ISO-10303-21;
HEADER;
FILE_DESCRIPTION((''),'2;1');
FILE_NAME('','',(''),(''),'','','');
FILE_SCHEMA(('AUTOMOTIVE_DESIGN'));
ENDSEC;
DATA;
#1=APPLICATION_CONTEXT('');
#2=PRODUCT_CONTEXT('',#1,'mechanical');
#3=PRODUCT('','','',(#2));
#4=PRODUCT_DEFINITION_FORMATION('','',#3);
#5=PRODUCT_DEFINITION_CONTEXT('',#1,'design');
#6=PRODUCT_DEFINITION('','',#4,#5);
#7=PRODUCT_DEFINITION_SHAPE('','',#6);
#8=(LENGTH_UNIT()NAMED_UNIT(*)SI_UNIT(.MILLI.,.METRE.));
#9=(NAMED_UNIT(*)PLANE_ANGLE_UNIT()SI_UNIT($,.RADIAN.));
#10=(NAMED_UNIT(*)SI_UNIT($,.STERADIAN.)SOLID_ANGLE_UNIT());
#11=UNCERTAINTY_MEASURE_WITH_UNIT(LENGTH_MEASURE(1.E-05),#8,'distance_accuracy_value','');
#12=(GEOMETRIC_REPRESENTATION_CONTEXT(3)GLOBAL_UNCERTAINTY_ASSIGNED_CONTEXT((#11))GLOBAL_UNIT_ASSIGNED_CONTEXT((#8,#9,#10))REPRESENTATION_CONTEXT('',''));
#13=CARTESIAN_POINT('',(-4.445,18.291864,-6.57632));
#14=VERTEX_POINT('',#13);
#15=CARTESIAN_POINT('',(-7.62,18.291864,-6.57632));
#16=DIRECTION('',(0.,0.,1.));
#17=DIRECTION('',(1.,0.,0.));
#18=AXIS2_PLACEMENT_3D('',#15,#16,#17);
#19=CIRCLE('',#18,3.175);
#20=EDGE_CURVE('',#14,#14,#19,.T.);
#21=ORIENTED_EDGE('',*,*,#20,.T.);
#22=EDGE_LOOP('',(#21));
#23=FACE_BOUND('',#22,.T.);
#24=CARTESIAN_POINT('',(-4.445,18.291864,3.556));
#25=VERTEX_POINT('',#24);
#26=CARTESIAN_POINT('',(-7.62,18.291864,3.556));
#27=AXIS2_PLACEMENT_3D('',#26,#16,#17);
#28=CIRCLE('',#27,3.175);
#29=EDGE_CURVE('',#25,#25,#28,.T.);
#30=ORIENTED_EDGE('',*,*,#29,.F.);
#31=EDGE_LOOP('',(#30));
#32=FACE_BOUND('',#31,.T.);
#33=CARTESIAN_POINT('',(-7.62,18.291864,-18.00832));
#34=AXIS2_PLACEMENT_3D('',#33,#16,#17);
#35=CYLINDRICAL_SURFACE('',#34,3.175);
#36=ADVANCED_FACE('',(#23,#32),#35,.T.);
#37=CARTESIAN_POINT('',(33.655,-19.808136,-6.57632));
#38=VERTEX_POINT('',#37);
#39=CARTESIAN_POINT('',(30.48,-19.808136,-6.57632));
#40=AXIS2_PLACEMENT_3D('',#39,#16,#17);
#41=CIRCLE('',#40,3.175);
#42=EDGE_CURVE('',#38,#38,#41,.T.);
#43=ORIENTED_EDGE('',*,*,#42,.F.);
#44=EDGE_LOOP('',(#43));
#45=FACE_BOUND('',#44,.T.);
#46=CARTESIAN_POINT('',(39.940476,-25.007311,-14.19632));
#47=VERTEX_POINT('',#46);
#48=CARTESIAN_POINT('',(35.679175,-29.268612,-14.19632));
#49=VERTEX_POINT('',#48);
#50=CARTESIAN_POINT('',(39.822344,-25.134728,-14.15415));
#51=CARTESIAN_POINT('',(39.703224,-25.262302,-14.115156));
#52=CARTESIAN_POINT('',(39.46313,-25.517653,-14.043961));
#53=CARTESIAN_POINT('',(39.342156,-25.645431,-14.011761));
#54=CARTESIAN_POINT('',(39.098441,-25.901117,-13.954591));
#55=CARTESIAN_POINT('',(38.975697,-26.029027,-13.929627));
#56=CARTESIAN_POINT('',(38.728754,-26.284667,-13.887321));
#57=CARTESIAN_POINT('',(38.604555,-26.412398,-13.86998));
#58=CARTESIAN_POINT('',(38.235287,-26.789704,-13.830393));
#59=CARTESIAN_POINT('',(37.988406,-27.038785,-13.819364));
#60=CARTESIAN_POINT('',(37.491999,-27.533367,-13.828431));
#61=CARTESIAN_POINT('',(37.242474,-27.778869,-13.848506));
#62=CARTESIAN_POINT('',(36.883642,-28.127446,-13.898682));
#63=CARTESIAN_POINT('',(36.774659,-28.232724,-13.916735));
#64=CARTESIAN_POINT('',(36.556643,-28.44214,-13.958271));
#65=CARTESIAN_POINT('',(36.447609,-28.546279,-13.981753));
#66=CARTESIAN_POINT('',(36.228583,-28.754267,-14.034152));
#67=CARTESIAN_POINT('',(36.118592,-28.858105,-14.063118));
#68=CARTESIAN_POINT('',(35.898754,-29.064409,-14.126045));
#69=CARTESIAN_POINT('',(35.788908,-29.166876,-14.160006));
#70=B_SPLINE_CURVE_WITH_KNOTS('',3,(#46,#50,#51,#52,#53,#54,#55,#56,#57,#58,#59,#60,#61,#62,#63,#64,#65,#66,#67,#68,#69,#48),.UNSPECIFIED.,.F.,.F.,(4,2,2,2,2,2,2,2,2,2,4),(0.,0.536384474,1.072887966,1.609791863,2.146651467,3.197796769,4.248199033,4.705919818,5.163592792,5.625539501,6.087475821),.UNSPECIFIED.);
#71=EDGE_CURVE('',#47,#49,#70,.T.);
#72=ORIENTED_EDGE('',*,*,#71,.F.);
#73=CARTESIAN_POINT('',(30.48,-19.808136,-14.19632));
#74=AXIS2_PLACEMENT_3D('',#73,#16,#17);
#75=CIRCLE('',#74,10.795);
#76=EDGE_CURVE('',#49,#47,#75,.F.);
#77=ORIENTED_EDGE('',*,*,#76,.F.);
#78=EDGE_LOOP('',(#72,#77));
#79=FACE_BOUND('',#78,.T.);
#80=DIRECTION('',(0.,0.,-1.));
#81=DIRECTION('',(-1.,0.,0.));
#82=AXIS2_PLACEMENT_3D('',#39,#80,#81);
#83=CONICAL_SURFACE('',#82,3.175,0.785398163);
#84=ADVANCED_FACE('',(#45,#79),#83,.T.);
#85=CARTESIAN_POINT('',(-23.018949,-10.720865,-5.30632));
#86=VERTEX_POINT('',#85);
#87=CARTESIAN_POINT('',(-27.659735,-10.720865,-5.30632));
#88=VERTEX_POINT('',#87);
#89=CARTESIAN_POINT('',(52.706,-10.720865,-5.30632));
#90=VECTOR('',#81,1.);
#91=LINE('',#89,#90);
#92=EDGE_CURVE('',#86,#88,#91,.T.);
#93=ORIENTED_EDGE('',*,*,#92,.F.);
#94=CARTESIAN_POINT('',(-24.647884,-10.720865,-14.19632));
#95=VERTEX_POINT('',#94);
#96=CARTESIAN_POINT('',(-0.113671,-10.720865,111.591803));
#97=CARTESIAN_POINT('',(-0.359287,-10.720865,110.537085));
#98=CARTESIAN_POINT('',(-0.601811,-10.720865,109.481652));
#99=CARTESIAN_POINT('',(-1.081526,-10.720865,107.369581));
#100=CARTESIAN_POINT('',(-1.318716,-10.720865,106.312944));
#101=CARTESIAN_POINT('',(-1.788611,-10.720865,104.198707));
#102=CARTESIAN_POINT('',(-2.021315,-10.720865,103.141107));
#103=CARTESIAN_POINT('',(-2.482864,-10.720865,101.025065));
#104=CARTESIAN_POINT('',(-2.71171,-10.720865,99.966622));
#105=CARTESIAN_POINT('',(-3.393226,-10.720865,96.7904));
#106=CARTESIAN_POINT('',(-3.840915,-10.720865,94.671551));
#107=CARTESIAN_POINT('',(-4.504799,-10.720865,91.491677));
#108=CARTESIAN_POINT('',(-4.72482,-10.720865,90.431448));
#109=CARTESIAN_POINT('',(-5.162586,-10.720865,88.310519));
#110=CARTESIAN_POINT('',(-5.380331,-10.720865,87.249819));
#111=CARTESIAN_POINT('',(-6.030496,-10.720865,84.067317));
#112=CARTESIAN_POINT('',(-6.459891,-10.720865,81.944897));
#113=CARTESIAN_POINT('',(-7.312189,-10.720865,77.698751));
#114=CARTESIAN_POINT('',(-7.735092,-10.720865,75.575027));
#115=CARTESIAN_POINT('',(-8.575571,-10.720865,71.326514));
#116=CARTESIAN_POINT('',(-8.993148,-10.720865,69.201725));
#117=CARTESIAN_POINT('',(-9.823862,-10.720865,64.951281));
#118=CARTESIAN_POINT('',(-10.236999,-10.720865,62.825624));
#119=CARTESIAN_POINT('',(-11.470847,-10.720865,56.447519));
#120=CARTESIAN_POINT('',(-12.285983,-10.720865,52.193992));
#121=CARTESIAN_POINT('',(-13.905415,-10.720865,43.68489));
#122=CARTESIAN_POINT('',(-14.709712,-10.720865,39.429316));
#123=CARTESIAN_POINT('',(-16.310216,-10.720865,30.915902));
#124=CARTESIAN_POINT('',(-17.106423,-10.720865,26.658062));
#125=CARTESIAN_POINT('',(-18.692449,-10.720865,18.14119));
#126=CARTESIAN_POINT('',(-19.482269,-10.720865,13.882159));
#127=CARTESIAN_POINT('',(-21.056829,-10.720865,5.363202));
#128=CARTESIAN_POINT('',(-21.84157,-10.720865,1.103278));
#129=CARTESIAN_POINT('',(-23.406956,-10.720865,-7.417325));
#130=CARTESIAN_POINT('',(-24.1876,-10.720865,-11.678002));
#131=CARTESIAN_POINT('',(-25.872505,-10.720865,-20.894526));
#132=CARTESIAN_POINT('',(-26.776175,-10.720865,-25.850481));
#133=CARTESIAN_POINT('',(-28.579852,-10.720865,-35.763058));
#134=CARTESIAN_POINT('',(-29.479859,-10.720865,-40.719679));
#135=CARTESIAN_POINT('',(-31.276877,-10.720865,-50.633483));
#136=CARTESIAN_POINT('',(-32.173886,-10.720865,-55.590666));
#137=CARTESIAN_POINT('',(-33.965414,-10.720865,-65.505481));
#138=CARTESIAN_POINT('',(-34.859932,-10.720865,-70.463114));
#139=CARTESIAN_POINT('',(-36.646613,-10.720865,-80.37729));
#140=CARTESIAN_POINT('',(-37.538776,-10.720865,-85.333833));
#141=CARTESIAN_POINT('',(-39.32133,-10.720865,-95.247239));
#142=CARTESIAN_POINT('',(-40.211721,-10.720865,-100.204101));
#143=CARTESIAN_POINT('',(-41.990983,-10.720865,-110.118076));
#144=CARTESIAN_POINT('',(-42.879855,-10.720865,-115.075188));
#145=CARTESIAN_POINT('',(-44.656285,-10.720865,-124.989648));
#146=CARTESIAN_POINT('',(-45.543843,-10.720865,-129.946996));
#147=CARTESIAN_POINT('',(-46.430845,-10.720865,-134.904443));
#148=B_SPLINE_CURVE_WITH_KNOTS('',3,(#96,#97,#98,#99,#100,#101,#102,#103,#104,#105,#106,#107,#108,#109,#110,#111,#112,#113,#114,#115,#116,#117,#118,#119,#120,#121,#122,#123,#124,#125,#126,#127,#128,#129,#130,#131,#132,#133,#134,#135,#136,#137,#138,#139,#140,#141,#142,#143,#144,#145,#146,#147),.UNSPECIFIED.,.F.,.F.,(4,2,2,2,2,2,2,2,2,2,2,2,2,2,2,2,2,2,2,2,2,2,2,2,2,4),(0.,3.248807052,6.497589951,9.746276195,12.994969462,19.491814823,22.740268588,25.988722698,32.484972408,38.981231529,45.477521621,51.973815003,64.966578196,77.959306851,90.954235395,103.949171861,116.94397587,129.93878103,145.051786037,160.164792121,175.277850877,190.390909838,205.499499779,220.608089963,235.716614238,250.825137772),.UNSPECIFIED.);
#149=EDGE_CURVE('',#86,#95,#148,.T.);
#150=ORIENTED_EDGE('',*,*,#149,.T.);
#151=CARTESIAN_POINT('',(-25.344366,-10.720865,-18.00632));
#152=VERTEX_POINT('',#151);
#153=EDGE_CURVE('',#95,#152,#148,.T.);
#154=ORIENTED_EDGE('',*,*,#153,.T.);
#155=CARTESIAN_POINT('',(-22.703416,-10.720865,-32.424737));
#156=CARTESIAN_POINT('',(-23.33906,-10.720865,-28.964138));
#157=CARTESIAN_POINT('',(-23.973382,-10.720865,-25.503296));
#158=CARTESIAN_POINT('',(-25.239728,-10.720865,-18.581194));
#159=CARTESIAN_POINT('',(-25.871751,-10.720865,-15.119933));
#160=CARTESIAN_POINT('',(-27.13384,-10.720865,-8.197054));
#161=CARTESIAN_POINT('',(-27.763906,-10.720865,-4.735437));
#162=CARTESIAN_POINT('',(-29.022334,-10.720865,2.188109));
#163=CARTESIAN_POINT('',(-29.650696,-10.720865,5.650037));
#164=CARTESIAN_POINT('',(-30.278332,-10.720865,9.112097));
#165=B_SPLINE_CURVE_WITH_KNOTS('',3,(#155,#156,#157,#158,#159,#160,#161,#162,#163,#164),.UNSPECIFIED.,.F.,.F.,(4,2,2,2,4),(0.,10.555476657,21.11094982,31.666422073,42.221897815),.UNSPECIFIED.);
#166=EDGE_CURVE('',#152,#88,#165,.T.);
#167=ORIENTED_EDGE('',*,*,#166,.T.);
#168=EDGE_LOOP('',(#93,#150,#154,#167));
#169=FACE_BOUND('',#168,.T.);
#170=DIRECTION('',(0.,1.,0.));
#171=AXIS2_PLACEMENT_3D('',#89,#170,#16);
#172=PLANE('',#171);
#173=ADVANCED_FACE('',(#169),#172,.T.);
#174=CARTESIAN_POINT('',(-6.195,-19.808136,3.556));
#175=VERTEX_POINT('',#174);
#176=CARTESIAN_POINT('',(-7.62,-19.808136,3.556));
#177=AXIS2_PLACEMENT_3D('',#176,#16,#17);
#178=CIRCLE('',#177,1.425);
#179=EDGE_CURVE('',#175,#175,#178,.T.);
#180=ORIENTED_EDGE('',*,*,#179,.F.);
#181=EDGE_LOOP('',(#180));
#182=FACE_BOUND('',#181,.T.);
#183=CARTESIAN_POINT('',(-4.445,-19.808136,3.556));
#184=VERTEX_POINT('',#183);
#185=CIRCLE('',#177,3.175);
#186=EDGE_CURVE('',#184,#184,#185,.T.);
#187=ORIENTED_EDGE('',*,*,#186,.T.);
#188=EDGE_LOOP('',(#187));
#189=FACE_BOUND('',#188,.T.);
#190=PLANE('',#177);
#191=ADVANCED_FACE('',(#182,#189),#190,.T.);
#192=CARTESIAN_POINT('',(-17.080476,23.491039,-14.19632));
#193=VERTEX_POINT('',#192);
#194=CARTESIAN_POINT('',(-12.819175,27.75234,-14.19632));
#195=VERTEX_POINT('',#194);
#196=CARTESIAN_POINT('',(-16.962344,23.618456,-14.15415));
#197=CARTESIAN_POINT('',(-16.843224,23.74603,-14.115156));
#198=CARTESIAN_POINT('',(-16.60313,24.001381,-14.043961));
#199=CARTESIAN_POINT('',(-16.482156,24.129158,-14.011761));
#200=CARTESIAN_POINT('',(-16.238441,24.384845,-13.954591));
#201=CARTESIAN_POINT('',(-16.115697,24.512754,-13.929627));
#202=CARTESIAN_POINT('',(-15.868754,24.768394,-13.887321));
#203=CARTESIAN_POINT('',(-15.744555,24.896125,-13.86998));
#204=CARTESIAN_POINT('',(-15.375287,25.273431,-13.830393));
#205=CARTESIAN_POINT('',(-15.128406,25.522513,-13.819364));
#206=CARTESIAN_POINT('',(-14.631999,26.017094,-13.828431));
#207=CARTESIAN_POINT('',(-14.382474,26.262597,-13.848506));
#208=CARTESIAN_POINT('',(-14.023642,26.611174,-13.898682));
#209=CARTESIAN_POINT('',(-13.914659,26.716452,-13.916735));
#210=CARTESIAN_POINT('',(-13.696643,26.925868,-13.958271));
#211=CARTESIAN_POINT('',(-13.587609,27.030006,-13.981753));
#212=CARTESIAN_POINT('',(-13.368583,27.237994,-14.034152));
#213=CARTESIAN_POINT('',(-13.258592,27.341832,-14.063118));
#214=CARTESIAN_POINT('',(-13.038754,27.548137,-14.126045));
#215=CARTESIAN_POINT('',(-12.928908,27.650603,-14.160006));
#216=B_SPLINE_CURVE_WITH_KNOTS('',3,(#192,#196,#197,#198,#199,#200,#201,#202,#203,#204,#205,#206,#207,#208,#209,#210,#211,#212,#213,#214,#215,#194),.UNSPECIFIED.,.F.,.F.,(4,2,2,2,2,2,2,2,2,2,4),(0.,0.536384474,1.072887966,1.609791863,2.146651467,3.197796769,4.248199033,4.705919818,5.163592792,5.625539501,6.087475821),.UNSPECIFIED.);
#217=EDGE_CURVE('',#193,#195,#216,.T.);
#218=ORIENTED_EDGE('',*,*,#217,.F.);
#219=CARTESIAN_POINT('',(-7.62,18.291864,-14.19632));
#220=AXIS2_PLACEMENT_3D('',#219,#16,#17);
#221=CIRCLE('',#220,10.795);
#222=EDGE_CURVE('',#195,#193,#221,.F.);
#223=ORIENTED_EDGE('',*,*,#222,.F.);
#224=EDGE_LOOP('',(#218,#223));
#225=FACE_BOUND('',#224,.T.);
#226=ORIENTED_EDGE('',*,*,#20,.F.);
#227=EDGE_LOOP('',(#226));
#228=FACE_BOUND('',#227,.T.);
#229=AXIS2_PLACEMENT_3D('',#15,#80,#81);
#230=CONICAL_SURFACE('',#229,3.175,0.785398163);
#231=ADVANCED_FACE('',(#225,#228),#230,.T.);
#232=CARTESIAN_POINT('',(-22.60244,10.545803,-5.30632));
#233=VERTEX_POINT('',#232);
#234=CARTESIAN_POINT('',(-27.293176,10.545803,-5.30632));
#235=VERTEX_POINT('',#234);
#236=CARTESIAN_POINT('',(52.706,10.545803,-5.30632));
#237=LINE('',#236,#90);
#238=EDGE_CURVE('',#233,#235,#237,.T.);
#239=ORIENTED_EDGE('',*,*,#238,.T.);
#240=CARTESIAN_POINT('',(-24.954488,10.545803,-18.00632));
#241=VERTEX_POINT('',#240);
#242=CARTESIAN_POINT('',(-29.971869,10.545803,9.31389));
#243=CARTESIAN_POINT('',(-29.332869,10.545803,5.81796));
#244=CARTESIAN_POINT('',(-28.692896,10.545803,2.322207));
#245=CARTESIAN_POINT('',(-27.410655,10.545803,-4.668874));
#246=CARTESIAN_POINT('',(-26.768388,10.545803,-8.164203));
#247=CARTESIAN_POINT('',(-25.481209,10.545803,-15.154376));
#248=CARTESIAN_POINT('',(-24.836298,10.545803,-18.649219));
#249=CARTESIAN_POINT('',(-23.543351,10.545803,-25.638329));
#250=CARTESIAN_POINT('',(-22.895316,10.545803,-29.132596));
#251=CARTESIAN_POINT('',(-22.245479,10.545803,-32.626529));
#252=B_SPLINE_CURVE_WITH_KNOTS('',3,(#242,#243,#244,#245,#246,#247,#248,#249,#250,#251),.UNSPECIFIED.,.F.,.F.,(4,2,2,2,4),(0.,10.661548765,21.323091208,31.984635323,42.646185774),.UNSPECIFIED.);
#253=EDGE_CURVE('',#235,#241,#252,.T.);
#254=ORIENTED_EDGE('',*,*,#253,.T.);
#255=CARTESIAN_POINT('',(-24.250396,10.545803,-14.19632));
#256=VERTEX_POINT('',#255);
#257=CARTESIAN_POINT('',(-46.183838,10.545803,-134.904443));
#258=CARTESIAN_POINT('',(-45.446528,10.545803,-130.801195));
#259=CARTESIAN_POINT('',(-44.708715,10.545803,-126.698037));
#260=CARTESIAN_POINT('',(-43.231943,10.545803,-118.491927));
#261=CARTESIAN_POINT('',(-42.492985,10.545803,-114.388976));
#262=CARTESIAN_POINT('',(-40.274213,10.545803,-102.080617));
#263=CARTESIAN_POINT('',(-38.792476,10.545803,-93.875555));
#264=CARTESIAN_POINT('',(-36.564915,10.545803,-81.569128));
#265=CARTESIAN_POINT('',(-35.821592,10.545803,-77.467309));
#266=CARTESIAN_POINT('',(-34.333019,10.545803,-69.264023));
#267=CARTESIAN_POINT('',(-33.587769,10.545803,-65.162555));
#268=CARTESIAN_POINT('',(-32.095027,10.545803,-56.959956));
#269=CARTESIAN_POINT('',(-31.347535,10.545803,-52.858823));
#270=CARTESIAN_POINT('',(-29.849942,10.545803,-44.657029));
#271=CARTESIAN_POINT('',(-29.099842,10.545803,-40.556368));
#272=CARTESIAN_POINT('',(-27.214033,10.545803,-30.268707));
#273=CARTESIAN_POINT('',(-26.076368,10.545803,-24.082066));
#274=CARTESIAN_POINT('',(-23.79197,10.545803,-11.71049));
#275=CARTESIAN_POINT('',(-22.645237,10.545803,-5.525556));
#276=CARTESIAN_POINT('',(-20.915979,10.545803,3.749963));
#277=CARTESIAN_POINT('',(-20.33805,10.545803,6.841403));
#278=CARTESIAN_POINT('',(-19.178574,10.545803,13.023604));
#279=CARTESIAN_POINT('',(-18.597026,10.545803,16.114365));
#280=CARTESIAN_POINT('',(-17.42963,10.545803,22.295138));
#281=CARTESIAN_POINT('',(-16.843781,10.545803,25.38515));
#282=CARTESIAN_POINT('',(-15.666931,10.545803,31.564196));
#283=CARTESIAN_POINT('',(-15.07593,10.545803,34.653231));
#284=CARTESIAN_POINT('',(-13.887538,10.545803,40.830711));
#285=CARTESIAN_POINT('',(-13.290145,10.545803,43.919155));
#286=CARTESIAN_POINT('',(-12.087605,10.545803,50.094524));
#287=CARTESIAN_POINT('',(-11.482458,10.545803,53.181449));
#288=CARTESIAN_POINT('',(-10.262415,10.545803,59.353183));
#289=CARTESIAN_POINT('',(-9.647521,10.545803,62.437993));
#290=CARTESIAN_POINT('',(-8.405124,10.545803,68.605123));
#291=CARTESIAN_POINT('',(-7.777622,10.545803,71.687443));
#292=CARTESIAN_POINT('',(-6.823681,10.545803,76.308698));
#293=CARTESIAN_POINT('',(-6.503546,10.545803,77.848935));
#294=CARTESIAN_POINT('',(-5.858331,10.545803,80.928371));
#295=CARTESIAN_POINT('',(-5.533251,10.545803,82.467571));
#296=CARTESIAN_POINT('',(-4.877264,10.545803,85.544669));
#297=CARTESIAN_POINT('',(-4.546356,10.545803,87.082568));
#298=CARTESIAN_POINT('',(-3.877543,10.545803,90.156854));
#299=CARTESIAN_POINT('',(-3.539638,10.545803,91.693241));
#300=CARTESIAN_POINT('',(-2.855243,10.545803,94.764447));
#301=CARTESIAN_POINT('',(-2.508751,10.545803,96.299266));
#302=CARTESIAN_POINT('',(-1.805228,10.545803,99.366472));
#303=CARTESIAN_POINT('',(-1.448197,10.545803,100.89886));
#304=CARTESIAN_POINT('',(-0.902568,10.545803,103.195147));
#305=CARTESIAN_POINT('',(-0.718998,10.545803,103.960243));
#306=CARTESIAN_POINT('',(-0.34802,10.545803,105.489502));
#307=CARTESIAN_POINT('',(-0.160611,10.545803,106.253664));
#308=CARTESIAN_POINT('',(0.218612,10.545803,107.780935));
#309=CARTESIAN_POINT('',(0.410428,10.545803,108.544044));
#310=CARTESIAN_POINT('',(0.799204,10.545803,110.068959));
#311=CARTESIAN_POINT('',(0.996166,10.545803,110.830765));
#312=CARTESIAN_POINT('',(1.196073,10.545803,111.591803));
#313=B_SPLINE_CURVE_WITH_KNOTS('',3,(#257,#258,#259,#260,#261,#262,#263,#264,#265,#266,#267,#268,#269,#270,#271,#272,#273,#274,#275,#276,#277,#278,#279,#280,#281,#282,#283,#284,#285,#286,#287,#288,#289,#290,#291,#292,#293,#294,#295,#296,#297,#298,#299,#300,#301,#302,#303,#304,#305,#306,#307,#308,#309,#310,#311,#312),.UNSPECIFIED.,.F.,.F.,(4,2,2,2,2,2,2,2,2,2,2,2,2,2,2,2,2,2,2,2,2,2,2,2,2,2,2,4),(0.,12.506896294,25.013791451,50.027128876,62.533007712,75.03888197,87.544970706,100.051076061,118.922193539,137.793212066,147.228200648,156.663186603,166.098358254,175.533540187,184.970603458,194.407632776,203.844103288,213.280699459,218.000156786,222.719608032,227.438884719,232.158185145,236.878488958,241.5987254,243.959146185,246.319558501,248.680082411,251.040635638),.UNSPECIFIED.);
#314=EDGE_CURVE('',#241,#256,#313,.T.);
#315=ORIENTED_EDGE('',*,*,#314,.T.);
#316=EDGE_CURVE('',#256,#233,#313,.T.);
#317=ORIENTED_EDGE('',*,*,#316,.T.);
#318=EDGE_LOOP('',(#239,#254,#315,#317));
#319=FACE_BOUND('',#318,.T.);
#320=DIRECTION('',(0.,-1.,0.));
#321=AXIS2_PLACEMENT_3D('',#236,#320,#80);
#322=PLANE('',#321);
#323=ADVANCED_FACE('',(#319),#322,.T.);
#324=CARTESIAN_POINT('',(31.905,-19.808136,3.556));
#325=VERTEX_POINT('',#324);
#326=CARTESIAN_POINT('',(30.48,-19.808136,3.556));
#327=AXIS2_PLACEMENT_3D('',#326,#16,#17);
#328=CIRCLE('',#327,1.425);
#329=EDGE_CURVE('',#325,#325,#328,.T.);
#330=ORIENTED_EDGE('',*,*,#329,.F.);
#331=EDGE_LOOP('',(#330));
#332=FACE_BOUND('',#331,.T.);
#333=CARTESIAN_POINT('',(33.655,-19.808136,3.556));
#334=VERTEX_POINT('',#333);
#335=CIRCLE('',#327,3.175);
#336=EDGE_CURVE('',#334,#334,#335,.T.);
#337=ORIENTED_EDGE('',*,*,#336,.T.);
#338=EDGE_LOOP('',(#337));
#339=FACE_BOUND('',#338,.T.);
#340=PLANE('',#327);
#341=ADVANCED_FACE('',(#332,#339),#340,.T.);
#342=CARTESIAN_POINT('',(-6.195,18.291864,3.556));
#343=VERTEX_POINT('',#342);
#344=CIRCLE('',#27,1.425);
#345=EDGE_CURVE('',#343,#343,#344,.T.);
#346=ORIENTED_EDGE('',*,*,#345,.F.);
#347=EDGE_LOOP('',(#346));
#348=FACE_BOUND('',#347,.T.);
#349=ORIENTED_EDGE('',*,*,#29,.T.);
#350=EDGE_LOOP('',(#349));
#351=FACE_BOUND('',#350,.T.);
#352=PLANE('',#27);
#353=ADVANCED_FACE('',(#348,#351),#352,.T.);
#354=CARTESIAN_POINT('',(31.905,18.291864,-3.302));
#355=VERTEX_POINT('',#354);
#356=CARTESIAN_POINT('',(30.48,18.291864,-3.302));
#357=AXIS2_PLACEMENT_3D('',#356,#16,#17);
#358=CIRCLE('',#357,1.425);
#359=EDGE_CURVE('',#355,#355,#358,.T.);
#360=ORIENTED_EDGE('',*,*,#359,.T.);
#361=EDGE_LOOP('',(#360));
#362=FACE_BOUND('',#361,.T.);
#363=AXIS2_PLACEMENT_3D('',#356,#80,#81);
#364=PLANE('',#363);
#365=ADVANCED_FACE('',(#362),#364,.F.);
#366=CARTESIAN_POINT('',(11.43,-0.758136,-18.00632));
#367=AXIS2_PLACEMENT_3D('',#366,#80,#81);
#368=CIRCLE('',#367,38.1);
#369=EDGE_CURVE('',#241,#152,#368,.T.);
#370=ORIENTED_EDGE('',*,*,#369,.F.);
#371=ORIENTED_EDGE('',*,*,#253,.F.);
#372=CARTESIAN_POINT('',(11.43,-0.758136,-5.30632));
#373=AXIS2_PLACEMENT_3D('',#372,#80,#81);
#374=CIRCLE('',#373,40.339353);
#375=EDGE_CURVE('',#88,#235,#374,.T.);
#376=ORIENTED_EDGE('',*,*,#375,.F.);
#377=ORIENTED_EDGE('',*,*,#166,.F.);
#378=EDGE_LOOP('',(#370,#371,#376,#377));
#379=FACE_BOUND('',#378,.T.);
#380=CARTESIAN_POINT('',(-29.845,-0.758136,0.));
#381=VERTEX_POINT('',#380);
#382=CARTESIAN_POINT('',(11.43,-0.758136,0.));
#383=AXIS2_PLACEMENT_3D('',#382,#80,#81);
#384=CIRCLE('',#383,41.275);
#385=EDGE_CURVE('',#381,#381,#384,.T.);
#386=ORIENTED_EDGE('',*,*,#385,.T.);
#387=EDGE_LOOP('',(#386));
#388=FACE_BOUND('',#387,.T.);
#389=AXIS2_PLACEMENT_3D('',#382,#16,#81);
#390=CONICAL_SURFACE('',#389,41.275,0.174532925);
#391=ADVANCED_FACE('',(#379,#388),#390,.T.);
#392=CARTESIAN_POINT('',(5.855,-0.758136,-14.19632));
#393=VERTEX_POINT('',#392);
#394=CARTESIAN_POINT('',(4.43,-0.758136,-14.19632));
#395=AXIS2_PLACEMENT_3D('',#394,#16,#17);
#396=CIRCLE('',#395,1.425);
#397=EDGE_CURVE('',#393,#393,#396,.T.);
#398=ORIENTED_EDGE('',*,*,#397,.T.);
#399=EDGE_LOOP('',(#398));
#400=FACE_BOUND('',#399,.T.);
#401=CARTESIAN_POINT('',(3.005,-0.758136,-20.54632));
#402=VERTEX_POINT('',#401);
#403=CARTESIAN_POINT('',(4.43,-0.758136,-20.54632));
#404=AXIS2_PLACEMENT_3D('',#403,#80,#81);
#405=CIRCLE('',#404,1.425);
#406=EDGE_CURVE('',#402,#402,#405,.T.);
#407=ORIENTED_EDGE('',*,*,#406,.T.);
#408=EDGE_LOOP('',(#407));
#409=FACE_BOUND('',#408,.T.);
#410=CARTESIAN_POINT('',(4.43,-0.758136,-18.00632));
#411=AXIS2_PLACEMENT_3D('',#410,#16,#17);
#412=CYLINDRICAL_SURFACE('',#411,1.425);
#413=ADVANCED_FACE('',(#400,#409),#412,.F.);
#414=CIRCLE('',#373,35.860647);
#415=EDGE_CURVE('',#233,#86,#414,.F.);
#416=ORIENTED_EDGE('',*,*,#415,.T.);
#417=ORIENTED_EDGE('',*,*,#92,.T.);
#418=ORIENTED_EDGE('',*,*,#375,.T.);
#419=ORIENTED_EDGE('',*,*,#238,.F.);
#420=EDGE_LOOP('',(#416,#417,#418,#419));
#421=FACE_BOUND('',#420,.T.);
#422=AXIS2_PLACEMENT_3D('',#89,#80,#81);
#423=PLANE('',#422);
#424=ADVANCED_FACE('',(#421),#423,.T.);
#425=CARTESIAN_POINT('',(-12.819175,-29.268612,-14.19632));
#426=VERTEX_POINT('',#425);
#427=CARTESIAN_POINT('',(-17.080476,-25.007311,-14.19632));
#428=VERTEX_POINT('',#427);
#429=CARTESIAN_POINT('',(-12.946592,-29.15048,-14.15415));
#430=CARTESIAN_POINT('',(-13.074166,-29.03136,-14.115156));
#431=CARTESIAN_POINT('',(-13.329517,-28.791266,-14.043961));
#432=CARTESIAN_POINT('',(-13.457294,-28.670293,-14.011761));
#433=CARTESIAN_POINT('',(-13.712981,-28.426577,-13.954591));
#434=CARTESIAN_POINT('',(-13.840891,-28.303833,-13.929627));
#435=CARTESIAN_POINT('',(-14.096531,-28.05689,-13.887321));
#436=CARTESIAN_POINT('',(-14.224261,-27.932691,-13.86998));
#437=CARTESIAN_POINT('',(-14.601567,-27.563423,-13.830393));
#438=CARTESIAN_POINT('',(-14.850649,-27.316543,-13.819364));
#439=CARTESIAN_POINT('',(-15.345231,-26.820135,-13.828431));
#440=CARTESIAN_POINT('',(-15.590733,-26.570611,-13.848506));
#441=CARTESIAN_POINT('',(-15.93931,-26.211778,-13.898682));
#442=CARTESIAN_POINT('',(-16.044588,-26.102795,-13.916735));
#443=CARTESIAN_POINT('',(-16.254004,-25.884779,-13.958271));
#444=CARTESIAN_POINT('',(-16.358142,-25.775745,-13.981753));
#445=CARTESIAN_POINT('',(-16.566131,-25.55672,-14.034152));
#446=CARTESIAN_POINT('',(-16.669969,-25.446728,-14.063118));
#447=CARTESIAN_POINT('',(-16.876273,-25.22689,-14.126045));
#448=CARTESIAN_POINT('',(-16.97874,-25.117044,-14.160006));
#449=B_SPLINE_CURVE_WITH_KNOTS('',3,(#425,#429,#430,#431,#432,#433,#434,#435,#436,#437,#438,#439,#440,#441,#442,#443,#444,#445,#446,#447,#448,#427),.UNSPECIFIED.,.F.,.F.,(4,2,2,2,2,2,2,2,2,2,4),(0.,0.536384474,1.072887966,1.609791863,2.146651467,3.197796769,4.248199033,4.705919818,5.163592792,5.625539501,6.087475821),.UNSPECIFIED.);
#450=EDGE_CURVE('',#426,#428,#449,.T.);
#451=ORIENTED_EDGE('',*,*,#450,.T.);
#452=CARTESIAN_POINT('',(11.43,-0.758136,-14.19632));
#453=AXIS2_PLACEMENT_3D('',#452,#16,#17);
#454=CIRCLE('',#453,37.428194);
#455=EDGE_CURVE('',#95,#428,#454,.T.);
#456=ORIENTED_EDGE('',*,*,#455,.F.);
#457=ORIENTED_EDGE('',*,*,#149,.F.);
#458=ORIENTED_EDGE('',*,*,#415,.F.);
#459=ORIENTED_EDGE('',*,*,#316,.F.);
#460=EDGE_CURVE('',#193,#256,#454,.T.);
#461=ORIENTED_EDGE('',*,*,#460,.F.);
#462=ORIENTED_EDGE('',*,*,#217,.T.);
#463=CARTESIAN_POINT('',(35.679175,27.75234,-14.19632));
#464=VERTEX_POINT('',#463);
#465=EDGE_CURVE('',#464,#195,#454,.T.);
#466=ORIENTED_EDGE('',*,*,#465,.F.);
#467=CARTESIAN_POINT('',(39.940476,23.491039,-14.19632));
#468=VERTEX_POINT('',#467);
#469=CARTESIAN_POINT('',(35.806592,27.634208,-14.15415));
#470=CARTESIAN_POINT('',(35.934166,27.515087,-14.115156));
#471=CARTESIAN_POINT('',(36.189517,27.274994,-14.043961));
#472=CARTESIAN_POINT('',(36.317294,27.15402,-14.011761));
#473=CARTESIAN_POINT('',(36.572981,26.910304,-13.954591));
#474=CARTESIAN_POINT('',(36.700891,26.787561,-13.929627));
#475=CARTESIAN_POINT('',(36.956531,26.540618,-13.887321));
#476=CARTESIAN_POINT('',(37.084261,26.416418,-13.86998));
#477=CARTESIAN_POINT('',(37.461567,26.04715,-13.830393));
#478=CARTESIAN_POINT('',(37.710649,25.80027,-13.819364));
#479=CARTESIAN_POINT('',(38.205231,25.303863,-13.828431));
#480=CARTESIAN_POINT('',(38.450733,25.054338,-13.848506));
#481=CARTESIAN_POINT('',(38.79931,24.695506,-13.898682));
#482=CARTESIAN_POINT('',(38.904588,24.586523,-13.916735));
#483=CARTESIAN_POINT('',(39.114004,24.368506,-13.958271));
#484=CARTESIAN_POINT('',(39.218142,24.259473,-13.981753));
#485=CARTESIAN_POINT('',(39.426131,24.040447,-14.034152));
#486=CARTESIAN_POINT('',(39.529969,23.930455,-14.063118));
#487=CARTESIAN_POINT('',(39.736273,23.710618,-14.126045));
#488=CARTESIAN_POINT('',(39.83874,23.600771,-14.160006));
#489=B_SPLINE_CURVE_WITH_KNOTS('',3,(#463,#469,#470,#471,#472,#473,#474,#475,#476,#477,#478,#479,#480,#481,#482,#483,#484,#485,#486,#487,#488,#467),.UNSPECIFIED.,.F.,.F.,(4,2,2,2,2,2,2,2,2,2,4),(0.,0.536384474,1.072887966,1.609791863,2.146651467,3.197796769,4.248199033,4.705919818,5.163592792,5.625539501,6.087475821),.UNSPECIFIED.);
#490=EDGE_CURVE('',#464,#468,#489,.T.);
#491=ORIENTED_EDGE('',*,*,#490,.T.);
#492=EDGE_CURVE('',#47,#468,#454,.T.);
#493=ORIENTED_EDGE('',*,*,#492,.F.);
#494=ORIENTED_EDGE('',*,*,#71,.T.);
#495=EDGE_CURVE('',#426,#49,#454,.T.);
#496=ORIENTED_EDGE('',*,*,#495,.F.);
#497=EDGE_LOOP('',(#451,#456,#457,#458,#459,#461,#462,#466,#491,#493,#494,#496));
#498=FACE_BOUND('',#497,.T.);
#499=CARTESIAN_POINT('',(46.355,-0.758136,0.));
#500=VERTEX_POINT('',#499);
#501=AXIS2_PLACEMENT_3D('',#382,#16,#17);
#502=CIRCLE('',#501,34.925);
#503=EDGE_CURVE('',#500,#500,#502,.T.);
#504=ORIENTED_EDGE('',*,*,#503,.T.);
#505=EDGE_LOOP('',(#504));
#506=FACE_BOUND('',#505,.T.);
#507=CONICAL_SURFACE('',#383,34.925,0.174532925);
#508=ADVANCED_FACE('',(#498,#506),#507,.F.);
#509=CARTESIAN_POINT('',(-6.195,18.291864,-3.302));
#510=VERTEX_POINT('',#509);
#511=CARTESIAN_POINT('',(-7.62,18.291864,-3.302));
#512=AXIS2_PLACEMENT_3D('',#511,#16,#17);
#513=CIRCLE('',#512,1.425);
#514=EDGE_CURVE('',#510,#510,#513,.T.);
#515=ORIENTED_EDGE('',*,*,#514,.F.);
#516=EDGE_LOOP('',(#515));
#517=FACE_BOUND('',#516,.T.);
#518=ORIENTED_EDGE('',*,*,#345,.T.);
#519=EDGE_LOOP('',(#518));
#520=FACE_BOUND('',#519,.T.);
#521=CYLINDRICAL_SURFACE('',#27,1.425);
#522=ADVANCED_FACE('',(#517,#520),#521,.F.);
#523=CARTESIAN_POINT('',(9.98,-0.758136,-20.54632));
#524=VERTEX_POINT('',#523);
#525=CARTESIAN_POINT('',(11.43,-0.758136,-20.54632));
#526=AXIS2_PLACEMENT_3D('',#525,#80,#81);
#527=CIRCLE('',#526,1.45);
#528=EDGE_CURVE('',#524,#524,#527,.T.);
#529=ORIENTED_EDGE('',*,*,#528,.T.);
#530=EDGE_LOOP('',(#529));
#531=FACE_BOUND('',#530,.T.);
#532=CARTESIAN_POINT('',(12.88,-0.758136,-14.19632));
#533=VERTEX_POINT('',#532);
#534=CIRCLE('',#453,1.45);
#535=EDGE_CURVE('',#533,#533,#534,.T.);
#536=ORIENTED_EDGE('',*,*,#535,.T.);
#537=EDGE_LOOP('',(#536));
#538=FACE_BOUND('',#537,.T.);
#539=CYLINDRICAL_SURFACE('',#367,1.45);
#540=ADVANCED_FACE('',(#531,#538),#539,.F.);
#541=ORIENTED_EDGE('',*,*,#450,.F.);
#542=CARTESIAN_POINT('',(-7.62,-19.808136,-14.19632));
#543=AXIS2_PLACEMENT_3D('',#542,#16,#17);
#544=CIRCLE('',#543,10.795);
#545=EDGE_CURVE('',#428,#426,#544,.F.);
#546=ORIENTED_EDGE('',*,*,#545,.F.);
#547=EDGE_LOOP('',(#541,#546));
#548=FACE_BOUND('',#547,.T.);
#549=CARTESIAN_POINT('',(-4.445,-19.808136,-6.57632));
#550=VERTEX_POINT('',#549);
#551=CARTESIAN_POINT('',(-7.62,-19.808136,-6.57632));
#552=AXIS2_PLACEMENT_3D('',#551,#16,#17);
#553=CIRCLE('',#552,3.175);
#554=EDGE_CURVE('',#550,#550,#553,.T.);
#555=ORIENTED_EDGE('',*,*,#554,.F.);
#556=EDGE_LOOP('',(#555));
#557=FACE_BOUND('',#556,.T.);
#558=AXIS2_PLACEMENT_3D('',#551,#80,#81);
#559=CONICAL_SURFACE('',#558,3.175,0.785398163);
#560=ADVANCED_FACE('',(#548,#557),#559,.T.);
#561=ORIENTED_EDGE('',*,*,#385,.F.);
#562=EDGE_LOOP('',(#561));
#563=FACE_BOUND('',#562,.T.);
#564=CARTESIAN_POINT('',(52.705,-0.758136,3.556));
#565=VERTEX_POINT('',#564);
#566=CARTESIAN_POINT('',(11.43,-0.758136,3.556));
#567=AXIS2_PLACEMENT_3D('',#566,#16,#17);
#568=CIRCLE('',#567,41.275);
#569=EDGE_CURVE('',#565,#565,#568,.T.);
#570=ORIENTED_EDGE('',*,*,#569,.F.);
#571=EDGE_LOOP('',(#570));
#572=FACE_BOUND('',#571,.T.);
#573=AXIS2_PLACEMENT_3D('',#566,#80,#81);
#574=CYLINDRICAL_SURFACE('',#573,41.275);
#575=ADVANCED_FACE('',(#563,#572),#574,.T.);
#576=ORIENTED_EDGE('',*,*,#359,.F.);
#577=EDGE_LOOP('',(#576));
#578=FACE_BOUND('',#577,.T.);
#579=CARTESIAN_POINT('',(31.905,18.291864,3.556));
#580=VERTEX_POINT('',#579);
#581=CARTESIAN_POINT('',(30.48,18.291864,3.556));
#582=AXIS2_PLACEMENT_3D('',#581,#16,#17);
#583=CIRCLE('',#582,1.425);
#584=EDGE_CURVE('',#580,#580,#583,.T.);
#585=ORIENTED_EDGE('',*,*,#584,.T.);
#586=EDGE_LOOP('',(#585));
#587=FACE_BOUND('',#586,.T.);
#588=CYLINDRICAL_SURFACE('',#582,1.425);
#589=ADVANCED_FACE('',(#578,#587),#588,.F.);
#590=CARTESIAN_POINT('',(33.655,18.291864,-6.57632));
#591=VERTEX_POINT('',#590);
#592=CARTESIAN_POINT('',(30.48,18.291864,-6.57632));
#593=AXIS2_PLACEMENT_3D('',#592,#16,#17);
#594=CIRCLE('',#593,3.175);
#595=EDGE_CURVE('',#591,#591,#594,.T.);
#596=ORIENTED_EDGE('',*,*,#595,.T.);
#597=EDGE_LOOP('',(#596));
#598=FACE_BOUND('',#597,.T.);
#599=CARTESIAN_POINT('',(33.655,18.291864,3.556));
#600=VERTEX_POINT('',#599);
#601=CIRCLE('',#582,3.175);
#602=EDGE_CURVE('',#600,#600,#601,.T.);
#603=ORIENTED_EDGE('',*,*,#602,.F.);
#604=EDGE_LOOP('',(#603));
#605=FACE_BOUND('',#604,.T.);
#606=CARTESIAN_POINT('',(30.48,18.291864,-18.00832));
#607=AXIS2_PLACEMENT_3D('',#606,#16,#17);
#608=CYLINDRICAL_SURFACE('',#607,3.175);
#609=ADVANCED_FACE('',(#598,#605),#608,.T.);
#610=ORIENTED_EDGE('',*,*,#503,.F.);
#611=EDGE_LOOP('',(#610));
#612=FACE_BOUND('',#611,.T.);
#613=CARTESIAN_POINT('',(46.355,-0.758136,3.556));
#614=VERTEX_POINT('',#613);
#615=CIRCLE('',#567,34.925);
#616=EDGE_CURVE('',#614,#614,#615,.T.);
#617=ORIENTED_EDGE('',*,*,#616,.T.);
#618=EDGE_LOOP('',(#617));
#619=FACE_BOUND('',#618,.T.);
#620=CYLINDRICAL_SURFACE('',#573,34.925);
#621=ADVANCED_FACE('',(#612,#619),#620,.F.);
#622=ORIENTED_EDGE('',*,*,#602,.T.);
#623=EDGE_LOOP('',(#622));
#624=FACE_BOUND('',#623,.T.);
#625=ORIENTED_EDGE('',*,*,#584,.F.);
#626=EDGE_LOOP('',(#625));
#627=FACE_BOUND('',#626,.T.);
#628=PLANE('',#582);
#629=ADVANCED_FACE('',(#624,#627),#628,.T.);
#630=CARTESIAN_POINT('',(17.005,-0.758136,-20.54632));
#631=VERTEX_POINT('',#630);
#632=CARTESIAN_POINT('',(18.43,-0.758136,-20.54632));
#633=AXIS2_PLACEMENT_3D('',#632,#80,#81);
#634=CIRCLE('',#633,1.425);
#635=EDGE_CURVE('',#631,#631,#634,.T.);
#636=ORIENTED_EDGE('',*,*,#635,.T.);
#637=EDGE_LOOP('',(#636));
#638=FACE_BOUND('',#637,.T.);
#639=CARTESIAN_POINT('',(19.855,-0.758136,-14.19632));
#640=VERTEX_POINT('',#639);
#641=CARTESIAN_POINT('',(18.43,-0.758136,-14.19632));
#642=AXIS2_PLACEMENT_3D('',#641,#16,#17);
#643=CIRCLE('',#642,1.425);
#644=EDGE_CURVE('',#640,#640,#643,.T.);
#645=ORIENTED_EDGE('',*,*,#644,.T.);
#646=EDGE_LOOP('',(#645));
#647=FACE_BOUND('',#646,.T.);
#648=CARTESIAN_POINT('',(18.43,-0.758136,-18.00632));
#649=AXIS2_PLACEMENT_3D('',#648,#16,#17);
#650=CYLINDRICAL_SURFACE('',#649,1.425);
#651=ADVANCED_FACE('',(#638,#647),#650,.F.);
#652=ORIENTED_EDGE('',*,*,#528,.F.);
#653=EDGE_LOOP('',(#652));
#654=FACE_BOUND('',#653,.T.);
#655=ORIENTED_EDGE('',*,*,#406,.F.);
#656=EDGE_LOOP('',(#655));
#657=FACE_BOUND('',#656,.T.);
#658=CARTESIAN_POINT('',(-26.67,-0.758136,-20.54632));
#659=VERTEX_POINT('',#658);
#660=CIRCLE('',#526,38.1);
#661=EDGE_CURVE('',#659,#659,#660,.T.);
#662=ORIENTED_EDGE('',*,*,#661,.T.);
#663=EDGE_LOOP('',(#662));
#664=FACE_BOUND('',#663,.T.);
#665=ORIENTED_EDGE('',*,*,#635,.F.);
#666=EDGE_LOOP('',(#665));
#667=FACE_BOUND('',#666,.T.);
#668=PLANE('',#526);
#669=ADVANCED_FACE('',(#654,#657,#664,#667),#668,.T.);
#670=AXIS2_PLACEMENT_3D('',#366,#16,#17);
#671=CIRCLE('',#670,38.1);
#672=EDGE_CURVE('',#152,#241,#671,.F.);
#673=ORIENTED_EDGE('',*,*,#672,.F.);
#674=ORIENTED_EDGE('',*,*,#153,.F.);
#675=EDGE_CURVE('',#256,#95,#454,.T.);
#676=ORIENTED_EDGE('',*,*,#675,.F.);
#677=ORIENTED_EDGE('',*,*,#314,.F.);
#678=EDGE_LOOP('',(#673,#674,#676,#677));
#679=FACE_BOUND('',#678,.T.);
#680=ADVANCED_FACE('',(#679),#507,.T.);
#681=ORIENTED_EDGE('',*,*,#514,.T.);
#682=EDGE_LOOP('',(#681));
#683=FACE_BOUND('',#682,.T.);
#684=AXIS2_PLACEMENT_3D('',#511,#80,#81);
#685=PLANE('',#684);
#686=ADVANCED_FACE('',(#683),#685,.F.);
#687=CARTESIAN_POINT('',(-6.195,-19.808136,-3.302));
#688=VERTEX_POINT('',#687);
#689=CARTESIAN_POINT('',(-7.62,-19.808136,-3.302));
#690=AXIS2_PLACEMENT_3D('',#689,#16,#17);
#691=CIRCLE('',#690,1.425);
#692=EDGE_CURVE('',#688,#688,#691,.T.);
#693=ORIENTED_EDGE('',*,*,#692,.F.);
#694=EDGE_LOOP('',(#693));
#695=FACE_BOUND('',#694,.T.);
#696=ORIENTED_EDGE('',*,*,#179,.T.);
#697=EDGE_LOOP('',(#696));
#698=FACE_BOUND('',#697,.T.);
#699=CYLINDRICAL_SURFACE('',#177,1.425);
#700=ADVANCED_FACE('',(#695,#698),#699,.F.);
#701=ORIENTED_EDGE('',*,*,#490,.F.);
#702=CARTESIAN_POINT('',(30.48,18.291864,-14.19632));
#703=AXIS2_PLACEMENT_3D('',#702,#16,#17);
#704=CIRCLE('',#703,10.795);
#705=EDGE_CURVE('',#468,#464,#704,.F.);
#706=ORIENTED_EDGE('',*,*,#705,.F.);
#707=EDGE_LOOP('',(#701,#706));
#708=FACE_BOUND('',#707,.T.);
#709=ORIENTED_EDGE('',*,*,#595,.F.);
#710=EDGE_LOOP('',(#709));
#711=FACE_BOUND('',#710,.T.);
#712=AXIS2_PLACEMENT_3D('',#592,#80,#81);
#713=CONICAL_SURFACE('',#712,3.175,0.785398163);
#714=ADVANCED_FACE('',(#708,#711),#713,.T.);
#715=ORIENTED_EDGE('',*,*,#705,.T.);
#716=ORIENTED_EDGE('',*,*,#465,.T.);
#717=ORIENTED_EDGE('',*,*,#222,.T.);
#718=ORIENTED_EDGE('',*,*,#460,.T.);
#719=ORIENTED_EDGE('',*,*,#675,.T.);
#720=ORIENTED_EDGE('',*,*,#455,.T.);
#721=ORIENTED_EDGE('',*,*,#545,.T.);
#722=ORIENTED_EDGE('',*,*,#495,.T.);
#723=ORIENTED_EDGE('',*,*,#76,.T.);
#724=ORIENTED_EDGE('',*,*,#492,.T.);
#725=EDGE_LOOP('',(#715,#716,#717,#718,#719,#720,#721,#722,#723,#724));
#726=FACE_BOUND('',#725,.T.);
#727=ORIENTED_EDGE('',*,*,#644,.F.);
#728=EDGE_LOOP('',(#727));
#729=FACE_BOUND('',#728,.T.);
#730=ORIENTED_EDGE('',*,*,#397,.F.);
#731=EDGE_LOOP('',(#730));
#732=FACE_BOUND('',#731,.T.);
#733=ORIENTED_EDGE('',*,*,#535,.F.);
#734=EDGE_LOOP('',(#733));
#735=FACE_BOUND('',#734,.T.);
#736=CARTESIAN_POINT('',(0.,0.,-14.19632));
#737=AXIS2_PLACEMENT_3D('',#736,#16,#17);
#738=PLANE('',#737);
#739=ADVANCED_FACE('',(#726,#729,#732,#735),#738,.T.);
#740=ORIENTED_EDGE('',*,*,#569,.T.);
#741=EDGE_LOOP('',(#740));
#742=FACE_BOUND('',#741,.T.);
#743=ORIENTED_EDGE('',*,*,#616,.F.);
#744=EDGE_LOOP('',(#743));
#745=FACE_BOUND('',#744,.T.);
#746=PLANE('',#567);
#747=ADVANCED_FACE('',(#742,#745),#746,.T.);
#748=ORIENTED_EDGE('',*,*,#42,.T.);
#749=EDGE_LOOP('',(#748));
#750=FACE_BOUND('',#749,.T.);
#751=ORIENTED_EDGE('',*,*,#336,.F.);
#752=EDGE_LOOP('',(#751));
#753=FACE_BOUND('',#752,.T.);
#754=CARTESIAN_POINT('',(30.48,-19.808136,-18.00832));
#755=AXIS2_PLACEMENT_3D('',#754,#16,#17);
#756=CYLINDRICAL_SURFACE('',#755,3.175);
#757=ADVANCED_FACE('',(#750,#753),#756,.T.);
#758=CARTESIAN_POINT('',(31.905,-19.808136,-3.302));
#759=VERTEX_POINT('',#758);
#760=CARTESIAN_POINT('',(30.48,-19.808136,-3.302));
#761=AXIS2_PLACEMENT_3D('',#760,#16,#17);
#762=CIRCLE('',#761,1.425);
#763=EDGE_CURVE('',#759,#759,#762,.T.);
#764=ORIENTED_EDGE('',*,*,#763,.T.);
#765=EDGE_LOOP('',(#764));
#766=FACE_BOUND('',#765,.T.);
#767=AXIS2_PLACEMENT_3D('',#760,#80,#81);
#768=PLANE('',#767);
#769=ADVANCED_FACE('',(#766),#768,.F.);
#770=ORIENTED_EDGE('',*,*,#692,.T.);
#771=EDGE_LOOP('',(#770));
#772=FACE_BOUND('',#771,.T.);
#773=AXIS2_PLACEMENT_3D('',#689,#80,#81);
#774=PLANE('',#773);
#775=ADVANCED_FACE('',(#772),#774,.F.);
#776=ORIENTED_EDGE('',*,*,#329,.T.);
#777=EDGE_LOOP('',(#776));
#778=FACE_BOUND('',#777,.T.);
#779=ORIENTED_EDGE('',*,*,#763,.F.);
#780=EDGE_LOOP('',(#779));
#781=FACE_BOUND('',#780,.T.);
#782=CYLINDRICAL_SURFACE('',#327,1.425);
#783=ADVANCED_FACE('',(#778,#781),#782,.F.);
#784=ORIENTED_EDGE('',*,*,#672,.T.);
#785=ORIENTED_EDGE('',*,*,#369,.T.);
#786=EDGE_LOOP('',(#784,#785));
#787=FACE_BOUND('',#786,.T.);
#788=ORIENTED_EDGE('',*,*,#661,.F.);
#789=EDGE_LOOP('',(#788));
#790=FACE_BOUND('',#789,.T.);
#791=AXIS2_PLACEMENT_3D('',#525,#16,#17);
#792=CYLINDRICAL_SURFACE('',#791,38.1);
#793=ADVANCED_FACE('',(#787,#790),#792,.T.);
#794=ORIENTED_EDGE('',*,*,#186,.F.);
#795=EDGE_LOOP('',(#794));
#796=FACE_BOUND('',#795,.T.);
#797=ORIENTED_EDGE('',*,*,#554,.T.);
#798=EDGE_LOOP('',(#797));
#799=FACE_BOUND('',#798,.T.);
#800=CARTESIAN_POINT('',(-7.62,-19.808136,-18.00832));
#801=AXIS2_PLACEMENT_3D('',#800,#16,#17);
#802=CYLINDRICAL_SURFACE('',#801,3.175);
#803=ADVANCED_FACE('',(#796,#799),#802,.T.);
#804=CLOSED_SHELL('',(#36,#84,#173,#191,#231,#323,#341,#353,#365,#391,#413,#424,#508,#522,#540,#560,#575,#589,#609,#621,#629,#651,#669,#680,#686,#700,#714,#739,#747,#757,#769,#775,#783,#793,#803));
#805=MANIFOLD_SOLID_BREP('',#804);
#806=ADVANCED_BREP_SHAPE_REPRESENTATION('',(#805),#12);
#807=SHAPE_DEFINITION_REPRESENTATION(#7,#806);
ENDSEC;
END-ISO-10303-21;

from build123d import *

# Parameters (mm, degrees)
SKETCH2_R                 = 41.27500000000001
SKETCH2_R_2               = 34.925000000000004
BOSS_EXTRUDE1_DEPTH       = 3.555999999999654
SKETCH54_R                = 41.27500000000001
SKETCH54_R_2              = 34.92500000000001
BOSS_EXTRUDE2_DEPTH       = 25.4
BOSS_EXTRUDE2_TAPER       = 10.000000000000021
BOSS_EXTRUDE3_START       = -18.006319777
BOSS_EXTRUDE3_OUTLINE_R   = 38.1
BOSS_EXTRUDE3_DEPTH       = 3.81
BOSS_EXTRUDE5_REACH       = 72.778
SKETCH63_R                = 3.175000000000002
SKETCH63_R_2              = 3.175000000000009
SKETCH63_R_3              = 3.1750000000000047
SKETCH63_R_4              = 3.1750000000000056
F_3_0MM_DOWEL_HOLE4_D     = 2.85
F_3_0MM_DOWEL_HOLE4_DEPTH = 6.858
F_3_0MM_DOWEL_HOLE3_D     = 2.9
CUT_EXTRUDE2_REACH        = 126.878
SKETCH58_W                = 12.700000000000001
SKETCH58_H                = 21.266668123278706
SKETCH60_R                = 1.4249999999999978
SKETCH60_R_2              = 1.4250000000000005
CUT_EXTRUDE4_DEPTH        = 70.71188168256496
SKETCH64_R                = 1.425000000000001
SKETCH64_R_2              = 1.4249999999999978
SKETCH64_R_3              = 1.4499999999999962
BOSS_EXTRUDE6_DEPTH       = 2.54
CHAMFER1_SIZE             = 7.62


with BuildPart() as part:
    # Sketch2 → Boss-Extrude1 (new body)
    with BuildSketch(Plane(origin=(0, 0.7215916123591171, 0), x_dir=(1, 0, 0), z_dir=(0, 0, 1))):
        with Locations((11.43, -1.4797279014976155)):
            Circle(SKETCH2_R)
        with Locations((11.43, -1.4797279014976155)):
            Circle(SKETCH2_R_2, mode=Mode.SUBTRACT)
    extrude(amount=BOSS_EXTRUDE1_DEPTH)

    # Sketch54 → Boss-Extrude2 (add)
    with BuildSketch(Plane(origin=(0, 0, 0), x_dir=(-1, 0, 0), z_dir=(0, 0, -1))):
        with Locations((-11.43, -0.7581362891384984)):
            Circle(SKETCH54_R)
        with Locations(Location((-11.43, -0.7581362891384984, 0), (0, 0, 180))):
            Circle(SKETCH54_R_2, mode=Mode.SUBTRACT)
    extrude(amount=BOSS_EXTRUDE2_DEPTH, taper=BOSS_EXTRUDE2_TAPER)

    # Boss-Extrude3: read off the stored shape, not the designer's step
    # Boss-Extrude3 outline → Boss-Extrude3 (add)
    with BuildSketch(Plane.XY.offset(BOSS_EXTRUDE3_START)):
        with Locations((11.43, -0.758136289)):
            Circle(BOSS_EXTRUDE3_OUTLINE_R)
    extrude(amount=BOSS_EXTRUDE3_DEPTH)

    # Sketch63 → Boss-Extrude5 (add, up to next)
    with BuildSketch(Plane.XY.offset(3.555999999999654), mode=Mode.PRIVATE) as boss_extrude5_sk1:
        with Locations((-7.620000000000007, 18.2918637108615)):
            Circle(SKETCH63_R)
    boss_extrude5_tool1 = extrude(boss_extrude5_sk1.sketch, amount=-BOSS_EXTRUDE5_REACH, mode=Mode.PRIVATE) - part.part
    # Sketch63 → Boss-Extrude5 (add, up to next)
    with BuildSketch(Plane.XY.offset(3.555999999999654), mode=Mode.PRIVATE) as boss_extrude5_sk2:
        with Locations((30.479999999999997, 18.291863710861506)):
            Circle(SKETCH63_R_2)
    boss_extrude5_tool2 = extrude(boss_extrude5_sk2.sketch, amount=-BOSS_EXTRUDE5_REACH, mode=Mode.PRIVATE) - part.part
    # Sketch63 → Boss-Extrude5 (add, up to next)
    with BuildSketch(Plane.XY.offset(3.555999999999654), mode=Mode.PRIVATE) as boss_extrude5_sk3:
        with Locations((30.48, -19.8081362891385)):
            Circle(SKETCH63_R_3)
    boss_extrude5_tool3 = extrude(boss_extrude5_sk3.sketch, amount=-BOSS_EXTRUDE5_REACH, mode=Mode.PRIVATE) - part.part
    # Sketch63 → Boss-Extrude5 (add, up to next)
    with BuildSketch(Plane.XY.offset(3.555999999999654), mode=Mode.PRIVATE) as boss_extrude5_sk4:
        with Locations((-7.620000000000007, -19.8081362891385)):
            Circle(SKETCH63_R_4)
    boss_extrude5_tool4 = extrude(boss_extrude5_sk4.sketch, amount=-BOSS_EXTRUDE5_REACH, mode=Mode.PRIVATE) - part.part
    add(boss_extrude5_tool1.solids().sort_by_distance((-7.62, 18.291864, 3.556))[0])
    add(boss_extrude5_tool2.solids().sort_by_distance((30.48, 18.291864, 3.556))[0])
    add(boss_extrude5_tool3.solids().sort_by_distance((30.48, -19.808136, 3.556))[0])
    add(boss_extrude5_tool4.solids().sort_by_distance((-7.62, -19.808136, 3.556))[0])

    # Ø3.0mm Dowel Hole4
    with Locations(Plane.XY.offset(3.555999999999654)):
        with Locations((-7.62, 18.291863711), (30.48, 18.291863711), (30.48, -19.808136289), (-7.62, -19.808136289)):
            Hole(F_3_0MM_DOWEL_HOLE4_D / 2, depth=F_3_0MM_DOWEL_HOLE4_DEPTH)

    # Ø3.0mm Dowel Hole3 (through all)
    with Locations(Plane(origin=(0, 0, -18.006319777286198), x_dir=(-1, 0, 0), z_dir=(0, 0, -1))):
        with Locations((-11.43, -0.758136289)):
            Hole(F_3_0MM_DOWEL_HOLE3_D / 2)

    # Cut-Extrude2: up to this cone (the profile starts outside it)
    cut_extrude2_end = Plane(origin=(11.43, -0.7581362891384984, -11.65632), z_dir=(0, 0, -1)) * Cone(7.999516737370435, 65.961130686173, 328.7166474235434, mode=Mode.PRIVATE)
    # Sketch58 → Cut-Extrude2 (cut, up to the surface)
    with BuildSketch(Plane(origin=(-63.5, 0, 0), x_dir=(0, 0, -1), z_dir=(1, 0, 0)), mode=Mode.PRIVATE) as cut_extrude2_sk1:
        with Locations((11.656319777286228, -0.08753137128510957)):
            Rectangle(SKETCH58_W, SKETCH58_H)
    cut_extrude2_tool1 = extrude(cut_extrude2_sk1.sketch, amount=CUT_EXTRUDE2_REACH, mode=Mode.PRIVATE) - cut_extrude2_end
    add(cut_extrude2_tool1.solids().sort_by_distance((-63.5, -0.087531, -11.65632))[0], mode=Mode.SUBTRACT)

    # Sketch60 → Cut-Extrude4 (cut, through all)
    with BuildSketch(Plane.XY.offset(-14.196319777286197)):
        with Locations((18.43, -0.7581362891384957)):
            Circle(SKETCH60_R)
        with Locations((4.429999999999999, -0.7581362891384984)):
            Circle(SKETCH60_R_2)
    extrude(amount=-CUT_EXTRUDE4_DEPTH, mode=Mode.SUBTRACT)

    # Sketch64 → Boss-Extrude6 (add)
    with BuildSketch(Plane(origin=(0, 0, -18.006319777286198), x_dir=(-1, 0, 0), z_dir=(0, 0, -1))):
        with BuildLine():
            ThreePointArc((25.344366452837203, -10.720865432924475), (26.663599038852283, -0.05977229582778121), (24.954487952256596, 10.545802690354252))
            ThreePointArc((24.954487952256596, 10.545802690354252), (-49.52359903885228, -1.4565002824492193), (25.344366452837203, -10.720865432924475))
        make_face()
        with Locations(Location((-4.429999999999999, -0.7581362891384984, 0), (0, 0, 180))):
            Circle(SKETCH64_R, mode=Mode.SUBTRACT)
        with Locations(Location((-18.43, -0.7581362891384957, 0), (0, 0, 180))):
            Circle(SKETCH64_R_2, mode=Mode.SUBTRACT)
        with Locations((-11.43, -0.7581362891384984)):
            Circle(SKETCH64_R_3, mode=Mode.SUBTRACT)
    extrude(amount=BOSS_EXTRUDE6_DEPTH)

    # Chamfer1
    # the kernel refuses this chamfer: 7.62 mm, written as the material it adds along each edge
    with BuildSketch(Plane(origin=(-7.620000000000007, 18.2918637108615, -14.196319777000001), x_dir=(1, 0, 0), z_dir=(0, -1, 0))) as chamfer1_piece_1:
        Polygon((3.1750000000000016 + CHAMFER1_SIZE, 0), (3.1750000000000016, CHAMFER1_SIZE), (3.1750000000000016, 0), align=None)
    revolve(axis=Axis((-7.620000000000007, 18.2918637108615, -14.196319777000001), (0, 0, 1)))
    with BuildSketch(Plane(origin=(30.479999999999997, 18.291863710861506, -14.196319777000001), x_dir=(1, 0, 0), z_dir=(0, -1, 0))) as chamfer1_piece_2:
        Polygon((3.1750000000000043 + CHAMFER1_SIZE, 0), (3.1750000000000043, CHAMFER1_SIZE), (3.1750000000000043, 0), align=None)
    revolve(axis=Axis((30.479999999999997, 18.291863710861506, -14.196319777000001), (0, 0, 1)))
    with BuildSketch(Plane(origin=(30.48, -19.8081362891385, -14.196319777000001), x_dir=(1, 0, 0), z_dir=(0, -1, 0))) as chamfer1_piece_3:
        Polygon((3.1750000000000007 + CHAMFER1_SIZE, 0), (3.1750000000000007, CHAMFER1_SIZE), (3.1750000000000007, 0), align=None)
    revolve(axis=Axis((30.48, -19.8081362891385, -14.196319777000001), (0, 0, 1)))
    with BuildSketch(Plane(origin=(-7.620000000000007, -19.8081362891385, -14.196319777000001), x_dir=(1, 0, 0), z_dir=(0, -1, 0))) as chamfer1_piece_4:
        Polygon((3.175000000000005 + CHAMFER1_SIZE, 0), (3.175000000000005, CHAMFER1_SIZE), (3.175000000000005, 0), align=None)
    revolve(axis=Axis((-7.620000000000007, -19.8081362891385, -14.196319777000001), (0, 0, 1)))


solid = part.part
